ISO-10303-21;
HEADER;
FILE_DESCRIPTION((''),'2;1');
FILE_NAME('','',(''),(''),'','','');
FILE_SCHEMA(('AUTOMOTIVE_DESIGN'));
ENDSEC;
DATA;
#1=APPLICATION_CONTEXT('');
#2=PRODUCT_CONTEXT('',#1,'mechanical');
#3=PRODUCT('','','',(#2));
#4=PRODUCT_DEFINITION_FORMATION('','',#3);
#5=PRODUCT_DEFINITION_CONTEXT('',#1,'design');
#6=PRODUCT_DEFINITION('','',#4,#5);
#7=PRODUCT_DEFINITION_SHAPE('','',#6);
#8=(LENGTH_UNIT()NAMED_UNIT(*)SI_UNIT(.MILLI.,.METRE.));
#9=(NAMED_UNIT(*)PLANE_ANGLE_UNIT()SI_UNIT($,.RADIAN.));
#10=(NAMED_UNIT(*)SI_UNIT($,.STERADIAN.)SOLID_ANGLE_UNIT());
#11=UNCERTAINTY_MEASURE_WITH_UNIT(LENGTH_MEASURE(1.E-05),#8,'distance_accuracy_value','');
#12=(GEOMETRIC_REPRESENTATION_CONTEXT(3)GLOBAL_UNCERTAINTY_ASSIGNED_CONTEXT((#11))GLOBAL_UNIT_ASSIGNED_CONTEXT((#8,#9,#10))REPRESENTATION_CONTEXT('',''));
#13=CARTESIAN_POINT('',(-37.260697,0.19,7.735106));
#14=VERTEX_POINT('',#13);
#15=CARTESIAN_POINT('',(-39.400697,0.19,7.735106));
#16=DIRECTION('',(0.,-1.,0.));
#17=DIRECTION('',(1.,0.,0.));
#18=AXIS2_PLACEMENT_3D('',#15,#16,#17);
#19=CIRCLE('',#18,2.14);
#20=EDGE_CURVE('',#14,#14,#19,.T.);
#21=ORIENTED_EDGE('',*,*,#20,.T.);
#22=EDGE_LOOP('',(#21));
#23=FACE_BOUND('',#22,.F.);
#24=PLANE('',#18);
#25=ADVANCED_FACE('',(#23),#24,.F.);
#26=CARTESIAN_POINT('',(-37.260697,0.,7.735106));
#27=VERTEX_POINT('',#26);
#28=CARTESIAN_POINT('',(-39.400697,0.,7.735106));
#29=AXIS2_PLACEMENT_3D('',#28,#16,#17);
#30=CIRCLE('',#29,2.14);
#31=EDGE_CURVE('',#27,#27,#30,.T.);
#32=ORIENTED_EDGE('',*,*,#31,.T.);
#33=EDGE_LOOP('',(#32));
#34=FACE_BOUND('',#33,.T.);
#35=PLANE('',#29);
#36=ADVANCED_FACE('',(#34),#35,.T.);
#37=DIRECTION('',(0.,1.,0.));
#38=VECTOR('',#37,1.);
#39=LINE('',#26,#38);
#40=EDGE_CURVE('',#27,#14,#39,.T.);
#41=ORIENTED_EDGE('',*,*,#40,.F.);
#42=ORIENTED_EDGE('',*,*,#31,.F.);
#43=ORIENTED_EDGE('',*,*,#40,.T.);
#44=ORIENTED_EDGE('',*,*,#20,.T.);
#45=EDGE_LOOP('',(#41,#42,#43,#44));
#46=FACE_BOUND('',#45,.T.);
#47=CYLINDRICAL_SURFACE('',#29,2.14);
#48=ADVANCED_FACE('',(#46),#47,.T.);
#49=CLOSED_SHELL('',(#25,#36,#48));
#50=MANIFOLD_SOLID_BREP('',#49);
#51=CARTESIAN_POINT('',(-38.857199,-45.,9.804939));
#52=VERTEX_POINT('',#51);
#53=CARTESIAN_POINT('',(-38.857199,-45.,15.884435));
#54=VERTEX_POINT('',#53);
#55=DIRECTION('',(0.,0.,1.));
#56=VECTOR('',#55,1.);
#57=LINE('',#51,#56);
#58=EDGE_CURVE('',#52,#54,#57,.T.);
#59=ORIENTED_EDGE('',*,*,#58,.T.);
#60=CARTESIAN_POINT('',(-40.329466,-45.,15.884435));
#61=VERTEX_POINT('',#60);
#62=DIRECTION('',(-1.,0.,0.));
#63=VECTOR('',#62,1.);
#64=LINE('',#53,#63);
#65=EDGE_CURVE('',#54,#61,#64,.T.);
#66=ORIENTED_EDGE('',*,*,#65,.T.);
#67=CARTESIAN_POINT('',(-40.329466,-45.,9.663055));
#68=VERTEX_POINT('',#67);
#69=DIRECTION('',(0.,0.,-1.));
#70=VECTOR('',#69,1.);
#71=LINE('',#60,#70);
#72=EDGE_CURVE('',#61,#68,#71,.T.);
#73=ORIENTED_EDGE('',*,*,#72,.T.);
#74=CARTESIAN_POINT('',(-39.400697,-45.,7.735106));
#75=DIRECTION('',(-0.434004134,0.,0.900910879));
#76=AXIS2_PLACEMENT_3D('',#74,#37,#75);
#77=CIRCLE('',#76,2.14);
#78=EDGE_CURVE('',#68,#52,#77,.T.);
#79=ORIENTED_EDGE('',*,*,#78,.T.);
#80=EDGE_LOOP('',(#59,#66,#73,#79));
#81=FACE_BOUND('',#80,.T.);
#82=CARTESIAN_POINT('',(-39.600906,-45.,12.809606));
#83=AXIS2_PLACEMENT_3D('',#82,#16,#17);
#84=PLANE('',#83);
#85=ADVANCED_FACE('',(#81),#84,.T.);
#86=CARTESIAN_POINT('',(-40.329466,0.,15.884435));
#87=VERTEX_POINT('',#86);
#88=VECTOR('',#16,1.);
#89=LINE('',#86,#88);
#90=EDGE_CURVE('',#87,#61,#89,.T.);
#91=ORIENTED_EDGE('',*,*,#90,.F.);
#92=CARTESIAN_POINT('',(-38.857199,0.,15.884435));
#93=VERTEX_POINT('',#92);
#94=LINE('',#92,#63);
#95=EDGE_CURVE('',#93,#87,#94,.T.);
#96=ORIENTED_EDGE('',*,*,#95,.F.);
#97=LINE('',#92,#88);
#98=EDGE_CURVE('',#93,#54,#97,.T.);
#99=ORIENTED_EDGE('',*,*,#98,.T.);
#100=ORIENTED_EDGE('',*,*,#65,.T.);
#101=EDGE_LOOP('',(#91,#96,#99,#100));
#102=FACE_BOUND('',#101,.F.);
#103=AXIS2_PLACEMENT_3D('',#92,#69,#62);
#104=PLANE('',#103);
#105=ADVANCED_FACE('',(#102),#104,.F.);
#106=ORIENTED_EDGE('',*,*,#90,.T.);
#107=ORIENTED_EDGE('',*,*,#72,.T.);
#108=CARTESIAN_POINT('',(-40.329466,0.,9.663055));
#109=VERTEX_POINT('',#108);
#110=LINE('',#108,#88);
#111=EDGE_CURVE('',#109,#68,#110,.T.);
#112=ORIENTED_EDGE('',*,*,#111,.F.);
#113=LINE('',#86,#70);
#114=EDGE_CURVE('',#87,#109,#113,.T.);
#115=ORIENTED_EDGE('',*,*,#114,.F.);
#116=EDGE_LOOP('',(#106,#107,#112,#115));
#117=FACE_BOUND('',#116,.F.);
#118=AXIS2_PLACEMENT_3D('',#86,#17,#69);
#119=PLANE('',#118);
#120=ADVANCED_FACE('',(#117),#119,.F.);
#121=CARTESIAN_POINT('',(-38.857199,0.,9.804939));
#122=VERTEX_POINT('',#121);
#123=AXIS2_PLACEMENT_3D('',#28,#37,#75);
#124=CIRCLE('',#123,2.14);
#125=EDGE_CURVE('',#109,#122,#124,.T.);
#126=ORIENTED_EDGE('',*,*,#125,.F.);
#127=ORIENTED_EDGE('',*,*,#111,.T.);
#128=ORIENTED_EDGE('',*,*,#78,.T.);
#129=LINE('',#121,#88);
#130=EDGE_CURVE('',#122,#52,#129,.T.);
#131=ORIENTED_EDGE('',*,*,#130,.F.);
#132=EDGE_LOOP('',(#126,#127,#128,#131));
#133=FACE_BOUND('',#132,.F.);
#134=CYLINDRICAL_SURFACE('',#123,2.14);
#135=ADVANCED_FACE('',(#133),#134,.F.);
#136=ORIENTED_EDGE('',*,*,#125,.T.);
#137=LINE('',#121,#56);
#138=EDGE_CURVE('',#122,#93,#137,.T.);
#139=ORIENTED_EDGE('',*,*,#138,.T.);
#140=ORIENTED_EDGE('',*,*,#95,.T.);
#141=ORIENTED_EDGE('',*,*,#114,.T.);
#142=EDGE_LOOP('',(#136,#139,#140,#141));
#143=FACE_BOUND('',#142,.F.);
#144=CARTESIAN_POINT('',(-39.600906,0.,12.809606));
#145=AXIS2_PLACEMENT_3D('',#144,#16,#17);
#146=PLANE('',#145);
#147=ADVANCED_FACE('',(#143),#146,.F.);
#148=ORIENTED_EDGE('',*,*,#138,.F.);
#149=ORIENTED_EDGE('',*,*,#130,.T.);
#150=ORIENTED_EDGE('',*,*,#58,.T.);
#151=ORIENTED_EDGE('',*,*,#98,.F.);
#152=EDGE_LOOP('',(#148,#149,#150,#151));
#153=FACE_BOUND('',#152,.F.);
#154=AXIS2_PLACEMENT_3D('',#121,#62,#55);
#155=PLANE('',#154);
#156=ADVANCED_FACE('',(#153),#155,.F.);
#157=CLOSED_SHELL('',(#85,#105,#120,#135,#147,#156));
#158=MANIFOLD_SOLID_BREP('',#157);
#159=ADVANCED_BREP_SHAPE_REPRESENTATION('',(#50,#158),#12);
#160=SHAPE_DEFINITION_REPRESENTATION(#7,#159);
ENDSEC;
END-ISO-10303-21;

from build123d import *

# Parameters (mm, degrees)
F0_R     = 2.14
F0_R_2   = 0.345
F1_DEPTH = 0.19
F4_DEPTH = 45


# Not quite as in the source:
# - the program builds the solid bodies; features that only make, move or delete a surface that nothing else refers to are left out


with BuildPart() as f1:
    # F0 (on Front) → F1 (new body)
    with BuildSketch(Plane.XZ):
        with Locations((-39.4006967545, 7.7351056971)):
            Circle(F0_R)
        with Locations((-39.4006967545, 7.7351056971)):
            Circle(F0_R_2, mode=Mode.SUBTRACT)
        with Locations((-39.4006967545, 7.7351056971)):
            Circle(F0_R_2)
    extrude(amount=-F1_DEPTH)


with BuildPart() as f4:
    # F3 (on face) → F4 (new body)
    with BuildSketch(Plane.XZ):
        with BuildLine():
            Line((-40.3294656016, 15.8844348318), (-40.3294656016, 9.6630549776))
            ThreePointArc((-40.3294656016, 9.6630549776), (-39.6059801702, 9.8652368478), (-38.8571992517, 9.8049391359))
            Line((-38.8571992517, 9.8049391359), (-38.8571992517, 15.8844348318))
            Line((-38.8571992517, 15.8844348318), (-40.3294656016, 15.8844348318))
        make_face()
    extrude(amount=F4_DEPTH)


solid = Compound([f1.part, f4.part])
